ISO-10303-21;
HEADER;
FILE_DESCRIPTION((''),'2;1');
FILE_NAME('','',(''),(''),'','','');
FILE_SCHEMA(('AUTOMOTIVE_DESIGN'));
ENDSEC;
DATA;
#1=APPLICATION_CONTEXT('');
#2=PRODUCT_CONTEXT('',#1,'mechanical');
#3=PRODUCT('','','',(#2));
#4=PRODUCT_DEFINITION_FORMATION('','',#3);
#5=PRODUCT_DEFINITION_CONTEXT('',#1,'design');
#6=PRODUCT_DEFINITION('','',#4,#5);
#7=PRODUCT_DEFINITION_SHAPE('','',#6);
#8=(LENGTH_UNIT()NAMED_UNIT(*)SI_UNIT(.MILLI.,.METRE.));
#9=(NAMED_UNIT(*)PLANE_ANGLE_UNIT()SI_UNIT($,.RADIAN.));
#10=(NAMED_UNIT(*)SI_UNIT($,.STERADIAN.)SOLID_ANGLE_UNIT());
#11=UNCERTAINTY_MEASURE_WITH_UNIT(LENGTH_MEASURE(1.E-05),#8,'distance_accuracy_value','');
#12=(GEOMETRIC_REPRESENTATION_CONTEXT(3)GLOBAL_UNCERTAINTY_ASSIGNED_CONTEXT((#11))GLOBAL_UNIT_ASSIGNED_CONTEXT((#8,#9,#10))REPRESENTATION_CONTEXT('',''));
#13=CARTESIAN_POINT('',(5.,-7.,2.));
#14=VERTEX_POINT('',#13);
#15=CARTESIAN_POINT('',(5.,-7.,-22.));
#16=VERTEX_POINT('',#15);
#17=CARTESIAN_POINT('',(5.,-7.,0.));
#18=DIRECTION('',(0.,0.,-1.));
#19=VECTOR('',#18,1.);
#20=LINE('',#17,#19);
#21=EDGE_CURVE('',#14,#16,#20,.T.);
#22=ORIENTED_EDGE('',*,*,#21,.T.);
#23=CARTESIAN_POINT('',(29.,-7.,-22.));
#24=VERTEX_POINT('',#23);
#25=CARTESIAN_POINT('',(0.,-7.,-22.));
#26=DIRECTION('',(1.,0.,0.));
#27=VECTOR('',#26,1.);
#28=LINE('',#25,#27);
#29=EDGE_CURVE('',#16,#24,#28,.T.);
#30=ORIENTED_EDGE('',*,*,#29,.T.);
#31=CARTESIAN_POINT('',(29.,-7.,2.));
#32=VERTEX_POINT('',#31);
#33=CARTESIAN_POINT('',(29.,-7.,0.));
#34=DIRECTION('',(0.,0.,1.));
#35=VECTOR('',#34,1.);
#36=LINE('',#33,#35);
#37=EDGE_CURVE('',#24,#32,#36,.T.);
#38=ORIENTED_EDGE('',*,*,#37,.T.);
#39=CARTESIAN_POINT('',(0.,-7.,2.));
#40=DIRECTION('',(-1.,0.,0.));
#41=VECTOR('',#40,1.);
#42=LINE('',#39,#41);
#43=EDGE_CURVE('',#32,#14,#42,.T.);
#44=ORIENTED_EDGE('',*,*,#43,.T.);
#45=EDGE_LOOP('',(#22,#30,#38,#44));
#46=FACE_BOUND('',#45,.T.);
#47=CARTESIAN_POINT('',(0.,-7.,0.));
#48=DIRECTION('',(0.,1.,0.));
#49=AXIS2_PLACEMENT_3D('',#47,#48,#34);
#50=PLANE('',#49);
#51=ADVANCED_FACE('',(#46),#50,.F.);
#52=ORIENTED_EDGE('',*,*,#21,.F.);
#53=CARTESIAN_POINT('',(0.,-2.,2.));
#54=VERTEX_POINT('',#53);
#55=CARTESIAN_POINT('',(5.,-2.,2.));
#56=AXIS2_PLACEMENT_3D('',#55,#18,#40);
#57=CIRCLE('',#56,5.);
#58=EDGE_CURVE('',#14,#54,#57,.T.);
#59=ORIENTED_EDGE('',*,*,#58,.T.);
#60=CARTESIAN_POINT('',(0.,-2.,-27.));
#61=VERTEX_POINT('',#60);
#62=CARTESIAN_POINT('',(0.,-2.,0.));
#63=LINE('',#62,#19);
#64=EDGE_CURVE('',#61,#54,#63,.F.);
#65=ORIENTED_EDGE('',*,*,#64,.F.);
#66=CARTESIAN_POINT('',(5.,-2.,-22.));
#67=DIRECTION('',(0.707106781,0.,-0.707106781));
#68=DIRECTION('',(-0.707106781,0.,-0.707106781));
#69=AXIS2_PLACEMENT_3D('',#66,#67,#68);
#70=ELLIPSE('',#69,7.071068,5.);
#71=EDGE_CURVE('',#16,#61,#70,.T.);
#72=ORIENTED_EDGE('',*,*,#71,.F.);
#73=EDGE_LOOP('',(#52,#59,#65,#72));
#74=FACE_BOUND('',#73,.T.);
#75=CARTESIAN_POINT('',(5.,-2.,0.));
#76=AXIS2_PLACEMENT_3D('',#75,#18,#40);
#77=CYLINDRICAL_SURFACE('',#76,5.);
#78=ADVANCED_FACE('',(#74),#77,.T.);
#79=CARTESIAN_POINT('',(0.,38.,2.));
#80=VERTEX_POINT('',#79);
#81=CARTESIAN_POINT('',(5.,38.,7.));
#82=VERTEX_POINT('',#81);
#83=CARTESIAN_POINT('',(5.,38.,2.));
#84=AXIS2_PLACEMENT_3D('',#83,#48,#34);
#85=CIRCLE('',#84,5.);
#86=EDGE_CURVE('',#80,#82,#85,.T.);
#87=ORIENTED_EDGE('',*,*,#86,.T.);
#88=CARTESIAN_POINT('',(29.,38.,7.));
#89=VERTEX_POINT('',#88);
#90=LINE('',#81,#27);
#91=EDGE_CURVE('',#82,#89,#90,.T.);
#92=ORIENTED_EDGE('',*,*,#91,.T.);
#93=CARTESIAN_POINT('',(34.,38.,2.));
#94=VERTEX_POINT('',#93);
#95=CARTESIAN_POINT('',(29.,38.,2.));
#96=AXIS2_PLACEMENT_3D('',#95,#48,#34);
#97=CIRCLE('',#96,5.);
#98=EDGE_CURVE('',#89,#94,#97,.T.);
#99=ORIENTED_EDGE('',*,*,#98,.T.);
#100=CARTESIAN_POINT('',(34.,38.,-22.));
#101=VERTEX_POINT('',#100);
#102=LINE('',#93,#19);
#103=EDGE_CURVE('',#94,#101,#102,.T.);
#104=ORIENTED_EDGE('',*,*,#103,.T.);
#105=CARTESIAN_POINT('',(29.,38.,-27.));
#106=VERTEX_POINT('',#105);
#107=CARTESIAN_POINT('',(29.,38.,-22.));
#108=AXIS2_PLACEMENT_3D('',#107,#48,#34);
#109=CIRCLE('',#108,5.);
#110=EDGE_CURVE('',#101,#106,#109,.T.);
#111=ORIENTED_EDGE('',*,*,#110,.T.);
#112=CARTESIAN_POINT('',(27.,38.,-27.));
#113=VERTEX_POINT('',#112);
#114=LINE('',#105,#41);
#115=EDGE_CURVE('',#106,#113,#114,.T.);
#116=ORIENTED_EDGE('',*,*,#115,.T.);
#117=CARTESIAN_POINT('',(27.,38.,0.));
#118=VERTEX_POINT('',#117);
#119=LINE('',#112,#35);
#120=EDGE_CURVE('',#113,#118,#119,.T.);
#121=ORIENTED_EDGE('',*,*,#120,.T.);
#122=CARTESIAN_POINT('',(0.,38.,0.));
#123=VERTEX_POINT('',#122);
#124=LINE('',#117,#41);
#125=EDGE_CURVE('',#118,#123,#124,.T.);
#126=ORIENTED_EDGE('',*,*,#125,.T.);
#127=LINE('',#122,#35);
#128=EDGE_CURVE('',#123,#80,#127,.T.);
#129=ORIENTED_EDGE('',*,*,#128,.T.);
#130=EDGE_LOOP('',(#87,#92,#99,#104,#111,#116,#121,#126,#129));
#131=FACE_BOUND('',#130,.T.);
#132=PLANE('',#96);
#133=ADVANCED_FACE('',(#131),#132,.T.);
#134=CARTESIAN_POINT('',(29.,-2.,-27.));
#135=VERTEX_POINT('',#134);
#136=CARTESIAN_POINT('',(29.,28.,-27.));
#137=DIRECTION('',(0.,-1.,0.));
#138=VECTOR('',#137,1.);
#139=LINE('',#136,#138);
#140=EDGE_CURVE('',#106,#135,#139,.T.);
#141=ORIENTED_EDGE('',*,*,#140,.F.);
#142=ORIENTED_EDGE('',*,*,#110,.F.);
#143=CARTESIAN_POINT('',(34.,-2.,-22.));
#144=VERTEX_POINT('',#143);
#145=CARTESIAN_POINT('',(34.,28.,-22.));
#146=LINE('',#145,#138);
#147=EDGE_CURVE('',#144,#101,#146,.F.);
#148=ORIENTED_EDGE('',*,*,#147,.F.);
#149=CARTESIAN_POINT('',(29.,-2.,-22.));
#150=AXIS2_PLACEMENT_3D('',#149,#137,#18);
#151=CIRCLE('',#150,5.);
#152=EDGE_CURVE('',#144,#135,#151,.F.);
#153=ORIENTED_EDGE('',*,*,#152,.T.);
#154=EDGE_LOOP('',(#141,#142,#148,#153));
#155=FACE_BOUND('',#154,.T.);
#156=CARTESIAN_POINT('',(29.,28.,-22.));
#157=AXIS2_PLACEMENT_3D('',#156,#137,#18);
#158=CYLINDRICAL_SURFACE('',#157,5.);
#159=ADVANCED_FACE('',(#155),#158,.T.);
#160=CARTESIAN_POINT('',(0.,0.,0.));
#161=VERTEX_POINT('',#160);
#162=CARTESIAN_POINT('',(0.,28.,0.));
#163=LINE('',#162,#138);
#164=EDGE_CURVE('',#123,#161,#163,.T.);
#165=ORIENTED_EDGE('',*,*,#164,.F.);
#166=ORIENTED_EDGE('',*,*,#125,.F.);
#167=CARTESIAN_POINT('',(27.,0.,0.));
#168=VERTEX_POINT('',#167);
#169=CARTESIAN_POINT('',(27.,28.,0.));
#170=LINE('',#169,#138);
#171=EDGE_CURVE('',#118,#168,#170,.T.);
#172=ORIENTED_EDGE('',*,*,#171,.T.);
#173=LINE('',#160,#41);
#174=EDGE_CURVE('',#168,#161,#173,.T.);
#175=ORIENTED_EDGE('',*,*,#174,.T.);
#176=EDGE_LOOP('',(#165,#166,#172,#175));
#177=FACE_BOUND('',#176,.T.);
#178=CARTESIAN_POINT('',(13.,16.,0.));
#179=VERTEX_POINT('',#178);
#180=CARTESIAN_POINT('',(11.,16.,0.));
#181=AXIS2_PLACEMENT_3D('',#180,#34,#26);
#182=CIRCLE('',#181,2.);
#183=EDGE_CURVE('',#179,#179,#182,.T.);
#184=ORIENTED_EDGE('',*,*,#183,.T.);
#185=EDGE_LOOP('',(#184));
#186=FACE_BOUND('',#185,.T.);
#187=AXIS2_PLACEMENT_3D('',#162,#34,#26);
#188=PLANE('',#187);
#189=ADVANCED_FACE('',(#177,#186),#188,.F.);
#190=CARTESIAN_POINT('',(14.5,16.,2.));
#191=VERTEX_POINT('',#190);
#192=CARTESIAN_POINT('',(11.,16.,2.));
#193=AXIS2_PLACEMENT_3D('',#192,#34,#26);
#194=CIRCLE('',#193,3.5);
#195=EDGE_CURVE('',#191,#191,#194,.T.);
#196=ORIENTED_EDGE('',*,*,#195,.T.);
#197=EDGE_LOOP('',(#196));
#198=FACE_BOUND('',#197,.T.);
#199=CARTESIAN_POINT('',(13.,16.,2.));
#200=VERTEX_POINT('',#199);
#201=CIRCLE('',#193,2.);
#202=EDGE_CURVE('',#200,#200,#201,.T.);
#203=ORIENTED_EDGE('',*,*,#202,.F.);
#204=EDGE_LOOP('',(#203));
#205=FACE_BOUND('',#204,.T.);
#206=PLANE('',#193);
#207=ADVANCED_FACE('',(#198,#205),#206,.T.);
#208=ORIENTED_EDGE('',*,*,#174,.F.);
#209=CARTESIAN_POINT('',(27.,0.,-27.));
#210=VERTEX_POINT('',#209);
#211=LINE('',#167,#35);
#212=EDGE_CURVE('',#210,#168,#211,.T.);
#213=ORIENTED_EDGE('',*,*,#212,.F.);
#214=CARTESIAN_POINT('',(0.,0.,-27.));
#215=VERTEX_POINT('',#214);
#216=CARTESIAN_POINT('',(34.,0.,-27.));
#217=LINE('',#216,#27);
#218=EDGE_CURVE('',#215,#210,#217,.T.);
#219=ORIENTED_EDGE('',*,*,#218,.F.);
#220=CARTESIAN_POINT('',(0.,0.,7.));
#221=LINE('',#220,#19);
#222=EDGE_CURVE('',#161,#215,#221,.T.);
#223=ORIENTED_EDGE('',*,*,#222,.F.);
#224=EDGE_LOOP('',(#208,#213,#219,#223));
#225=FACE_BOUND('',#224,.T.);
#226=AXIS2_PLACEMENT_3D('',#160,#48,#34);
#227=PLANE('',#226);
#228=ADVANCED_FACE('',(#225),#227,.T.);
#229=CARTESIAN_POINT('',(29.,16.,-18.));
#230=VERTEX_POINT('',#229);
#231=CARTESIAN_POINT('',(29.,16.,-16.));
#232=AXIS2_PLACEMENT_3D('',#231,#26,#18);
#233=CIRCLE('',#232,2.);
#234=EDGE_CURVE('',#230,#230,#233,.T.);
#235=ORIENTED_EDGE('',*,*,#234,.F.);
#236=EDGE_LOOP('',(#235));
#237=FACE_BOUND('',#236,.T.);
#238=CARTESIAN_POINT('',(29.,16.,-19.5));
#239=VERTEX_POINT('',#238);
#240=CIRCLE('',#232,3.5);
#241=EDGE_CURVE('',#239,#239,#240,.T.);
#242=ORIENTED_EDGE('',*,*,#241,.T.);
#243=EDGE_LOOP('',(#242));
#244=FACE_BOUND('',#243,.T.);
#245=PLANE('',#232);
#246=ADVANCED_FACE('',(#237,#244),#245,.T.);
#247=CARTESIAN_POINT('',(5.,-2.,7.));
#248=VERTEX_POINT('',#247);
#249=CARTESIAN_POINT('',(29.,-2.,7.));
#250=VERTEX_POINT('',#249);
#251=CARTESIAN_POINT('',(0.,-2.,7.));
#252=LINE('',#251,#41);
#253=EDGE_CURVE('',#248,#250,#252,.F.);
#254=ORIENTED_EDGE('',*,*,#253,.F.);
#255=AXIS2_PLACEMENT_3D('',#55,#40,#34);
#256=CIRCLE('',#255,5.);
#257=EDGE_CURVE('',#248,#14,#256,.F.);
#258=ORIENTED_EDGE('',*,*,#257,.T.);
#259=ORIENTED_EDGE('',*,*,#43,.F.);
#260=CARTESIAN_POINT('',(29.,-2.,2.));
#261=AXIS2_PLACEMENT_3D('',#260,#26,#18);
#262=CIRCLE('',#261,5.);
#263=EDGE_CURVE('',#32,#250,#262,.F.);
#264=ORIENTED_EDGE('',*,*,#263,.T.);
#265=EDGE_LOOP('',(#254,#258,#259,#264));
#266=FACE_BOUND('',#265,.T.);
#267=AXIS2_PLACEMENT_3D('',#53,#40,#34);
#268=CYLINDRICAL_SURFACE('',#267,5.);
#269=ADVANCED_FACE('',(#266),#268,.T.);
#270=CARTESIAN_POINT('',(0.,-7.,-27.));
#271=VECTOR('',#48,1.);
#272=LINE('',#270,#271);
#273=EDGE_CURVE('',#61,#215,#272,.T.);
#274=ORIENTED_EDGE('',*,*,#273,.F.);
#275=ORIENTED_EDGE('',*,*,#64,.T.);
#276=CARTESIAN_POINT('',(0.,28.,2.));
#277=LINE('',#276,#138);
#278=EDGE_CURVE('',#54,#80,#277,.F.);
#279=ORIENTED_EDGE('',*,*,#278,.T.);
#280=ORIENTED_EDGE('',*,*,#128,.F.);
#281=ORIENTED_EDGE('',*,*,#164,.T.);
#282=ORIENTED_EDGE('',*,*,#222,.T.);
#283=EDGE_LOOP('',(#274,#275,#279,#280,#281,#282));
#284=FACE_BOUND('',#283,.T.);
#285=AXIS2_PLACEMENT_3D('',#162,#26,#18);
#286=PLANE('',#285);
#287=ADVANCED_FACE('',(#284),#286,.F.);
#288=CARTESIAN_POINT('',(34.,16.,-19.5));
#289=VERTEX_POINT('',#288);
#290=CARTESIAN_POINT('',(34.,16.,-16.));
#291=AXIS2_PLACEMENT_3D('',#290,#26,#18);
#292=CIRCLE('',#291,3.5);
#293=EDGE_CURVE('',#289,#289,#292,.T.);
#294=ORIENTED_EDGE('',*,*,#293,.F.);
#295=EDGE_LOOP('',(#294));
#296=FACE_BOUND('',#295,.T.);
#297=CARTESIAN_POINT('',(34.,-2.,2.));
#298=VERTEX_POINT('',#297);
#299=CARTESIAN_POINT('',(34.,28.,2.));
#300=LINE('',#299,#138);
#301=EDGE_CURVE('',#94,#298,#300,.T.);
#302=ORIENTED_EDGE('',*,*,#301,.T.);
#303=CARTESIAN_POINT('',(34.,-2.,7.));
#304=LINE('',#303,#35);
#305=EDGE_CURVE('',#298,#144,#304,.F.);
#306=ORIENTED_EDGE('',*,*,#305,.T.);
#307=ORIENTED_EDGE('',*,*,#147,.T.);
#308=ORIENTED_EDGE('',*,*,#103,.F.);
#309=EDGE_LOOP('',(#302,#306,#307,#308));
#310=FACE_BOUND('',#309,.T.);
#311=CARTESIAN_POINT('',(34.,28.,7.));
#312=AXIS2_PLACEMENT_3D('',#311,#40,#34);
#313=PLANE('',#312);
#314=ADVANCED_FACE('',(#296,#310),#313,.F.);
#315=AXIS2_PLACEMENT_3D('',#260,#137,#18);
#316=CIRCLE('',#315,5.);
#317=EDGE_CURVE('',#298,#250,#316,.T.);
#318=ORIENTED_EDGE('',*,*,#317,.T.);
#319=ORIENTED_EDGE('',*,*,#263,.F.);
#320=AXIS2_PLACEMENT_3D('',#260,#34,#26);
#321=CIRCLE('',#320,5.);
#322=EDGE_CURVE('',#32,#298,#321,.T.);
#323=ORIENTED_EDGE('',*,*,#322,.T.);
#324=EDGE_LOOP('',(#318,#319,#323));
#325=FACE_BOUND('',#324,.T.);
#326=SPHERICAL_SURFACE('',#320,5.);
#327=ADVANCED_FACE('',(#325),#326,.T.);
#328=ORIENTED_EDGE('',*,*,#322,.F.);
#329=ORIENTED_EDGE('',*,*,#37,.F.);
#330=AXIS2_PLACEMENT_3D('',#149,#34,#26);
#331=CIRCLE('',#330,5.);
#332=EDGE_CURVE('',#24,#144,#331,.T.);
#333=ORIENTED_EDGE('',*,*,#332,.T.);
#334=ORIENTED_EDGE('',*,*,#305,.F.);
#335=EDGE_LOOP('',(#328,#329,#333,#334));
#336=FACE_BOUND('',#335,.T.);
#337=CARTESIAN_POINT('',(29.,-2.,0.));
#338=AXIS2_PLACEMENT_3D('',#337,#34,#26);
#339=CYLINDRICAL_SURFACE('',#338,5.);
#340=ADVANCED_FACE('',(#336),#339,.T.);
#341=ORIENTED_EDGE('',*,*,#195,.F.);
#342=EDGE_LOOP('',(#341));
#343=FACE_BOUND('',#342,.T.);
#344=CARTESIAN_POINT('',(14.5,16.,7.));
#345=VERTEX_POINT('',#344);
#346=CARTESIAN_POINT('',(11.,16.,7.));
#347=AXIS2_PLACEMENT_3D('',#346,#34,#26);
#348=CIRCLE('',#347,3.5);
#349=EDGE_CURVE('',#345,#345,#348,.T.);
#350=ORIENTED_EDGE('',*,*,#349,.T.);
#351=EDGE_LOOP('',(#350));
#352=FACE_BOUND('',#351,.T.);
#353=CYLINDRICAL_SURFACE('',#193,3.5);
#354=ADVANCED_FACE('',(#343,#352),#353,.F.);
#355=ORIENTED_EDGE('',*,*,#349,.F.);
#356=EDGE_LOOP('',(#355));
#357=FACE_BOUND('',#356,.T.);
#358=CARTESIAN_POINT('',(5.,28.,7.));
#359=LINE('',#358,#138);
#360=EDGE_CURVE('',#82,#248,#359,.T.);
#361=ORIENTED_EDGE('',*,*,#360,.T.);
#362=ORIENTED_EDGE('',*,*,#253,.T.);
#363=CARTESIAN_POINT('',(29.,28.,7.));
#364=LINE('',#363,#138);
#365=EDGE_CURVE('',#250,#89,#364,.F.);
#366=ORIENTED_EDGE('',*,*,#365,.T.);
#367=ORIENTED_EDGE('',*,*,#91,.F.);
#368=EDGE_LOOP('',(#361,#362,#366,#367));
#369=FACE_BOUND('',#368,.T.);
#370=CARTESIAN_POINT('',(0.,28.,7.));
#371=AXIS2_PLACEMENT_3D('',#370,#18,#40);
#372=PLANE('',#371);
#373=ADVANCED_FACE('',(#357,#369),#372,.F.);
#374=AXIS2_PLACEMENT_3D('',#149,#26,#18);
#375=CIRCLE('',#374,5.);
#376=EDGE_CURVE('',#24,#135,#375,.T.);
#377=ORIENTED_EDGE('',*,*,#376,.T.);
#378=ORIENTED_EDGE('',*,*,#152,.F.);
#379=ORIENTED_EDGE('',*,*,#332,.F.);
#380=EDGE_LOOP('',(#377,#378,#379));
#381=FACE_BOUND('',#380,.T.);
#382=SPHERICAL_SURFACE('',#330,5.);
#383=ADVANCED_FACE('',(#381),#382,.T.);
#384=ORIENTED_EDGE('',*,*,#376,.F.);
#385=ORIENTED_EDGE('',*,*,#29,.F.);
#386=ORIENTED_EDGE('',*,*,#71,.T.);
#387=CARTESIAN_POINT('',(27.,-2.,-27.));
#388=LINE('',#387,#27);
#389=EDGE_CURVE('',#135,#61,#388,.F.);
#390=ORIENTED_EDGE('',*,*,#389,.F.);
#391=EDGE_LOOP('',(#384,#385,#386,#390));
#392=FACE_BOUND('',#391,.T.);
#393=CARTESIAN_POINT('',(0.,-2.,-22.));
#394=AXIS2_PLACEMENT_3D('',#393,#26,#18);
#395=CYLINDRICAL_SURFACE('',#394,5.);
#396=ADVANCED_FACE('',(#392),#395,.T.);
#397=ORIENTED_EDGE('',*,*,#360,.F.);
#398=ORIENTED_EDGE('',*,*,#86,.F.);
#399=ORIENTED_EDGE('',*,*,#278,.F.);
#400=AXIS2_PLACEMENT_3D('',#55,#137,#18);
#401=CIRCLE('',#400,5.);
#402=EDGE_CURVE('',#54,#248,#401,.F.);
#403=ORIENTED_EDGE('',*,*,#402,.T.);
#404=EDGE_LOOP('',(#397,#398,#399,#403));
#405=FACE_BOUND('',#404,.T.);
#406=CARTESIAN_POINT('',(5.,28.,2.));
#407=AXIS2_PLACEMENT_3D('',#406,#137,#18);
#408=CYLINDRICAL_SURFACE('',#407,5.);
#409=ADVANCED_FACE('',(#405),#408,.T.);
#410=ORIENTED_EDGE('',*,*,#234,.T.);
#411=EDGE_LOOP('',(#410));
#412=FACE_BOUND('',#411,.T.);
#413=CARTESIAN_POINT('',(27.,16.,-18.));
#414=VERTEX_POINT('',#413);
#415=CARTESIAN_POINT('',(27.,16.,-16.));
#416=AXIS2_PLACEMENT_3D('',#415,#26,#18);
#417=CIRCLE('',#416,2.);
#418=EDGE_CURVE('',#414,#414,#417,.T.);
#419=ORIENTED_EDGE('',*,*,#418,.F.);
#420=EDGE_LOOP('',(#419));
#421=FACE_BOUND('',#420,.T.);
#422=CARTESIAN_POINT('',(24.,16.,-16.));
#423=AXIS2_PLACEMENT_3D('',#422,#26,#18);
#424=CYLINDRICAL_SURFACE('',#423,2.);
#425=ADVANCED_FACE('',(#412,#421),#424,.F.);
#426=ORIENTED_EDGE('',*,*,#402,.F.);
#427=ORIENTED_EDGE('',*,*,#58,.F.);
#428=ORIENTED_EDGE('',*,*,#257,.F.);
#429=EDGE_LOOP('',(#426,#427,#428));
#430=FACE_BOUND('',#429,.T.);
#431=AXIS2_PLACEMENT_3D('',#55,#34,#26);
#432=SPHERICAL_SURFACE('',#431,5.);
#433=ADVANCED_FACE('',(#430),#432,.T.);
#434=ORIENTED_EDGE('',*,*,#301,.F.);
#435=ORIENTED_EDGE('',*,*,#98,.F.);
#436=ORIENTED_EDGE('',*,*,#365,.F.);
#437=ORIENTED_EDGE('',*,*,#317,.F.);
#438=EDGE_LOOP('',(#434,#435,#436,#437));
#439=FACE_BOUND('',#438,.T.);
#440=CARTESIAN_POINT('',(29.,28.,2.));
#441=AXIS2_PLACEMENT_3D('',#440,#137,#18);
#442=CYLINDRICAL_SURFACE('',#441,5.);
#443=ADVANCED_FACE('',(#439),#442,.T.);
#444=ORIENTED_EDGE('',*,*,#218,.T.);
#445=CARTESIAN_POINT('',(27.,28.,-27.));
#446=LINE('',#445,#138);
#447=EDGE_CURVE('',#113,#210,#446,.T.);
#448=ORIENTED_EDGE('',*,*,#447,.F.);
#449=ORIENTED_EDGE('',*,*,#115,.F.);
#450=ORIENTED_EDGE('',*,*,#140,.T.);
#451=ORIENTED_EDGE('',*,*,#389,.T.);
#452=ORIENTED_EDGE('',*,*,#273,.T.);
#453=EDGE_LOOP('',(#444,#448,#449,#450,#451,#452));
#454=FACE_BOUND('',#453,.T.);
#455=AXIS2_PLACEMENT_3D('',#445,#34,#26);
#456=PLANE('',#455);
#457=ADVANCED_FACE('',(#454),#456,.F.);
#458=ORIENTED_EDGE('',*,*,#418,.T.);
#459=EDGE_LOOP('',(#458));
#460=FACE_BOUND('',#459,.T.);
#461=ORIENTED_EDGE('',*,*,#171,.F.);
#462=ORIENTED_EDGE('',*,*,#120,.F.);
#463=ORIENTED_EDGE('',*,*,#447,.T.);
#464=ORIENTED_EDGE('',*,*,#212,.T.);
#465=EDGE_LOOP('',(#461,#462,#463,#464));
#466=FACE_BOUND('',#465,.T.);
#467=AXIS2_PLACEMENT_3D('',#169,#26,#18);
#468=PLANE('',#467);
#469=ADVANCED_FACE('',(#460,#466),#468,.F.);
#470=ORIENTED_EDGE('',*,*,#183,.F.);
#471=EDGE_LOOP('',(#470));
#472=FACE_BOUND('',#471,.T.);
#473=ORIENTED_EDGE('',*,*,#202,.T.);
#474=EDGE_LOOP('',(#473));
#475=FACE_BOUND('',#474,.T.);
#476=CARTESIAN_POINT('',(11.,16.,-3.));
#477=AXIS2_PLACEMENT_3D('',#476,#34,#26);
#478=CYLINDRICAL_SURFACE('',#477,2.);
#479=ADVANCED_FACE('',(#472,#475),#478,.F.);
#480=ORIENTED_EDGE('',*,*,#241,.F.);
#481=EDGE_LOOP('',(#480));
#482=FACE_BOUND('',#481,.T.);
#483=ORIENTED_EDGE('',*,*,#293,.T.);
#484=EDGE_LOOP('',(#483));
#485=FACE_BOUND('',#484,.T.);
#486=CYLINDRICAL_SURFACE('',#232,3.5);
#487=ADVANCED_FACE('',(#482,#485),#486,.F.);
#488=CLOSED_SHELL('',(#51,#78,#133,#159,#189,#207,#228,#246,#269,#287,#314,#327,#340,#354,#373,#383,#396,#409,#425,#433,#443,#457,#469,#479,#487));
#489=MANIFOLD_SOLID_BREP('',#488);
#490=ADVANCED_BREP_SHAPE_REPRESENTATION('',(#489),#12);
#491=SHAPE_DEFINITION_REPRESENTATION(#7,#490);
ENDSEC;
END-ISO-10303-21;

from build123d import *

# Parameters (mm, degrees)
SALIENTE_EXTRUIR1_DEPTH = 28
CROQUIS2_W              = 34
CROQUIS2_H              = 34
SALIENTE_EXTRUIR2_DEPTH = 7
REDONDEO1_R             = 5
CROQUIS3_R              = 3.5
CORTAR_EXTRUIR1_DEPTH   = 5
CROQUIS4_R              = 2
CORTAR_EXTRUIR2_DEPTH   = 5
CROQUIS5_R              = 3.5
CORTAR_EXTRUIR3_DEPTH   = 5
CROQUIS6_R              = 2
CORTAR_EXTRUIR4_DEPTH   = 5
REDONDEO2_R             = 5
SALIENTE_EXTRUIR3_START = 10
SALIENTE_EXTRUIR3_DEPTH = 10


with BuildPart() as part:
    # Croquis1 → Saliente-Extruir1 (new body)
    with BuildSketch(Plane(origin=(0, 0, 0), x_dir=(1, 0, 0), z_dir=(0, 1, 0))):
        Polygon((0, 0), (27, 0), (27, 27), (34, 27), (34, -7), (0, -7), align=None)
    extrude(amount=SALIENTE_EXTRUIR1_DEPTH)

    # Croquis2 → Saliente-Extruir2 (add)
    with BuildSketch(Plane(origin=(0, 0, 0), x_dir=(-1, 0, 0), z_dir=(0, -1, 0))):
        with Locations((-17, 10)):
            Rectangle(CROQUIS2_W, CROQUIS2_H)
    extrude(amount=SALIENTE_EXTRUIR2_DEPTH)

    # Redondeo1
    redondeo1_edges = [part.edges().sort_by_distance(p)[0] for p in [
        (34, 10.5, -27),
        (34, 10.5, 7),
        (0, 10.5, 7),
        (34, -7, -10),
        (17, -7, 7),
    ]]
    fillet(redondeo1_edges, radius=REDONDEO1_R)

    # Croquis3 → Cortar-Extruir1 (cut)
    with BuildSketch(Plane(origin=(34, 0, 0), x_dir=(0, 0, -1), z_dir=(1, 0, 0))):
        with Locations((16, 16)):
            Circle(CROQUIS3_R)
    extrude(amount=-CORTAR_EXTRUIR1_DEPTH, mode=Mode.SUBTRACT)

    # Croquis4 → Cortar-Extruir2 (cut)
    with BuildSketch(Plane(origin=(29, 0, 0), x_dir=(0, 0, -1), z_dir=(1, 0, 0))):
        with Locations((16, 16)):
            Circle(CROQUIS4_R)
    extrude(amount=-CORTAR_EXTRUIR2_DEPTH, mode=Mode.SUBTRACT)

    # Croquis5 → Cortar-Extruir3 (cut)
    with BuildSketch(Plane.XY.offset(7)):
        with Locations((11, 16)):
            Circle(CROQUIS5_R)
    extrude(amount=-CORTAR_EXTRUIR3_DEPTH, mode=Mode.SUBTRACT)

    # Croquis6 → Cortar-Extruir4 (cut)
    with BuildSketch(Plane.XY.offset(2)):
        with Locations((11, 16)):
            Circle(CROQUIS6_R)
    extrude(amount=-CORTAR_EXTRUIR4_DEPTH, mode=Mode.SUBTRACT)

    # Redondeo2
    # the kernel refuses this fillet: 5 mm, written as the material it takes off along each edge
    with BuildSketch(Plane(origin=(29, -2, -22), x_dir=(0, -1, 0), z_dir=(0, 0, -1))) as redondeo2_piece_1_section:
        Polygon((0, 0), (REDONDEO2_R, 0), (REDONDEO2_R, -REDONDEO2_R), (0, -REDONDEO2_R), align=None)
    redondeo2_piece_1 = extrude(amount=REDONDEO2_R, mode=Mode.PRIVATE)
    redondeo2_piece_1 = redondeo2_piece_1 - Plane(origin=(29, -2, -22), x_dir=(-0.7071067811865475, 0.7071067811865475, 0), z_dir=(0, 0, -1)) * Sphere(REDONDEO2_R, mode=Mode.PRIVATE)
    add(redondeo2_piece_1, mode=Mode.SUBTRACT)
    with BuildSketch(Plane(origin=(5, -2, 2), x_dir=(0, -1, 0), z_dir=(-1, 0, 0))) as redondeo2_piece_2_section:
        Polygon((0, 0), (REDONDEO2_R, 0), (REDONDEO2_R, REDONDEO2_R), (0, REDONDEO2_R), align=None)
    redondeo2_piece_2 = extrude(amount=REDONDEO2_R, mode=Mode.PRIVATE)
    redondeo2_piece_2 = redondeo2_piece_2 - Plane(origin=(5, -2, 2), x_dir=(0, 0.7071067811865475, -0.7071067811865475), z_dir=(-1, 0, 0)) * Sphere(REDONDEO2_R, mode=Mode.PRIVATE)
    add(redondeo2_piece_2, mode=Mode.SUBTRACT)
    with BuildSketch(Plane(origin=(-12.5, -7, -27), x_dir=(0, 1, 0), z_dir=(1, 0, 0)), Plane(origin=(0, -7, 2), x_dir=(0, 1, 0), z_dir=(0, 0, -1))) as redondeo2_piece_3:
        with BuildLine():
            CenterArc((REDONDEO2_R, REDONDEO2_R), REDONDEO2_R, 180, 90)
            Line((0, REDONDEO2_R), (0, 0))
            Line((0, 0), (REDONDEO2_R, 0))
        make_face()
    extrude(amount=41.5, mode=Mode.SUBTRACT)

    # Croquis7 → Saliente-Extruir3 (add)
    with BuildSketch(Plane(origin=(0, 28, 0), x_dir=(1, 0, 0), z_dir=(0, 1, 0)).offset(SALIENTE_EXTRUIR3_START)):
        with BuildLine():
            Line((34, -2), (34, 22))
            ThreePointArc((34, 22), (32.535533906, 25.535533906), (29, 27))
            Line((29, 27), (27, 27))
            Line((27, 27), (27, 0))
            Line((27, 0), (0, 0))
            Line((0, 0), (0, -2))
            ThreePointArc((0, -2), (1.464466094, -5.535533906), (5, -7))
            Line((5, -7), (29, -7))
            ThreePointArc((29, -7), (32.535533906, -5.535533906), (34, -2))
        make_face()
    extrude(amount=-SALIENTE_EXTRUIR3_DEPTH)


solid = part.part
